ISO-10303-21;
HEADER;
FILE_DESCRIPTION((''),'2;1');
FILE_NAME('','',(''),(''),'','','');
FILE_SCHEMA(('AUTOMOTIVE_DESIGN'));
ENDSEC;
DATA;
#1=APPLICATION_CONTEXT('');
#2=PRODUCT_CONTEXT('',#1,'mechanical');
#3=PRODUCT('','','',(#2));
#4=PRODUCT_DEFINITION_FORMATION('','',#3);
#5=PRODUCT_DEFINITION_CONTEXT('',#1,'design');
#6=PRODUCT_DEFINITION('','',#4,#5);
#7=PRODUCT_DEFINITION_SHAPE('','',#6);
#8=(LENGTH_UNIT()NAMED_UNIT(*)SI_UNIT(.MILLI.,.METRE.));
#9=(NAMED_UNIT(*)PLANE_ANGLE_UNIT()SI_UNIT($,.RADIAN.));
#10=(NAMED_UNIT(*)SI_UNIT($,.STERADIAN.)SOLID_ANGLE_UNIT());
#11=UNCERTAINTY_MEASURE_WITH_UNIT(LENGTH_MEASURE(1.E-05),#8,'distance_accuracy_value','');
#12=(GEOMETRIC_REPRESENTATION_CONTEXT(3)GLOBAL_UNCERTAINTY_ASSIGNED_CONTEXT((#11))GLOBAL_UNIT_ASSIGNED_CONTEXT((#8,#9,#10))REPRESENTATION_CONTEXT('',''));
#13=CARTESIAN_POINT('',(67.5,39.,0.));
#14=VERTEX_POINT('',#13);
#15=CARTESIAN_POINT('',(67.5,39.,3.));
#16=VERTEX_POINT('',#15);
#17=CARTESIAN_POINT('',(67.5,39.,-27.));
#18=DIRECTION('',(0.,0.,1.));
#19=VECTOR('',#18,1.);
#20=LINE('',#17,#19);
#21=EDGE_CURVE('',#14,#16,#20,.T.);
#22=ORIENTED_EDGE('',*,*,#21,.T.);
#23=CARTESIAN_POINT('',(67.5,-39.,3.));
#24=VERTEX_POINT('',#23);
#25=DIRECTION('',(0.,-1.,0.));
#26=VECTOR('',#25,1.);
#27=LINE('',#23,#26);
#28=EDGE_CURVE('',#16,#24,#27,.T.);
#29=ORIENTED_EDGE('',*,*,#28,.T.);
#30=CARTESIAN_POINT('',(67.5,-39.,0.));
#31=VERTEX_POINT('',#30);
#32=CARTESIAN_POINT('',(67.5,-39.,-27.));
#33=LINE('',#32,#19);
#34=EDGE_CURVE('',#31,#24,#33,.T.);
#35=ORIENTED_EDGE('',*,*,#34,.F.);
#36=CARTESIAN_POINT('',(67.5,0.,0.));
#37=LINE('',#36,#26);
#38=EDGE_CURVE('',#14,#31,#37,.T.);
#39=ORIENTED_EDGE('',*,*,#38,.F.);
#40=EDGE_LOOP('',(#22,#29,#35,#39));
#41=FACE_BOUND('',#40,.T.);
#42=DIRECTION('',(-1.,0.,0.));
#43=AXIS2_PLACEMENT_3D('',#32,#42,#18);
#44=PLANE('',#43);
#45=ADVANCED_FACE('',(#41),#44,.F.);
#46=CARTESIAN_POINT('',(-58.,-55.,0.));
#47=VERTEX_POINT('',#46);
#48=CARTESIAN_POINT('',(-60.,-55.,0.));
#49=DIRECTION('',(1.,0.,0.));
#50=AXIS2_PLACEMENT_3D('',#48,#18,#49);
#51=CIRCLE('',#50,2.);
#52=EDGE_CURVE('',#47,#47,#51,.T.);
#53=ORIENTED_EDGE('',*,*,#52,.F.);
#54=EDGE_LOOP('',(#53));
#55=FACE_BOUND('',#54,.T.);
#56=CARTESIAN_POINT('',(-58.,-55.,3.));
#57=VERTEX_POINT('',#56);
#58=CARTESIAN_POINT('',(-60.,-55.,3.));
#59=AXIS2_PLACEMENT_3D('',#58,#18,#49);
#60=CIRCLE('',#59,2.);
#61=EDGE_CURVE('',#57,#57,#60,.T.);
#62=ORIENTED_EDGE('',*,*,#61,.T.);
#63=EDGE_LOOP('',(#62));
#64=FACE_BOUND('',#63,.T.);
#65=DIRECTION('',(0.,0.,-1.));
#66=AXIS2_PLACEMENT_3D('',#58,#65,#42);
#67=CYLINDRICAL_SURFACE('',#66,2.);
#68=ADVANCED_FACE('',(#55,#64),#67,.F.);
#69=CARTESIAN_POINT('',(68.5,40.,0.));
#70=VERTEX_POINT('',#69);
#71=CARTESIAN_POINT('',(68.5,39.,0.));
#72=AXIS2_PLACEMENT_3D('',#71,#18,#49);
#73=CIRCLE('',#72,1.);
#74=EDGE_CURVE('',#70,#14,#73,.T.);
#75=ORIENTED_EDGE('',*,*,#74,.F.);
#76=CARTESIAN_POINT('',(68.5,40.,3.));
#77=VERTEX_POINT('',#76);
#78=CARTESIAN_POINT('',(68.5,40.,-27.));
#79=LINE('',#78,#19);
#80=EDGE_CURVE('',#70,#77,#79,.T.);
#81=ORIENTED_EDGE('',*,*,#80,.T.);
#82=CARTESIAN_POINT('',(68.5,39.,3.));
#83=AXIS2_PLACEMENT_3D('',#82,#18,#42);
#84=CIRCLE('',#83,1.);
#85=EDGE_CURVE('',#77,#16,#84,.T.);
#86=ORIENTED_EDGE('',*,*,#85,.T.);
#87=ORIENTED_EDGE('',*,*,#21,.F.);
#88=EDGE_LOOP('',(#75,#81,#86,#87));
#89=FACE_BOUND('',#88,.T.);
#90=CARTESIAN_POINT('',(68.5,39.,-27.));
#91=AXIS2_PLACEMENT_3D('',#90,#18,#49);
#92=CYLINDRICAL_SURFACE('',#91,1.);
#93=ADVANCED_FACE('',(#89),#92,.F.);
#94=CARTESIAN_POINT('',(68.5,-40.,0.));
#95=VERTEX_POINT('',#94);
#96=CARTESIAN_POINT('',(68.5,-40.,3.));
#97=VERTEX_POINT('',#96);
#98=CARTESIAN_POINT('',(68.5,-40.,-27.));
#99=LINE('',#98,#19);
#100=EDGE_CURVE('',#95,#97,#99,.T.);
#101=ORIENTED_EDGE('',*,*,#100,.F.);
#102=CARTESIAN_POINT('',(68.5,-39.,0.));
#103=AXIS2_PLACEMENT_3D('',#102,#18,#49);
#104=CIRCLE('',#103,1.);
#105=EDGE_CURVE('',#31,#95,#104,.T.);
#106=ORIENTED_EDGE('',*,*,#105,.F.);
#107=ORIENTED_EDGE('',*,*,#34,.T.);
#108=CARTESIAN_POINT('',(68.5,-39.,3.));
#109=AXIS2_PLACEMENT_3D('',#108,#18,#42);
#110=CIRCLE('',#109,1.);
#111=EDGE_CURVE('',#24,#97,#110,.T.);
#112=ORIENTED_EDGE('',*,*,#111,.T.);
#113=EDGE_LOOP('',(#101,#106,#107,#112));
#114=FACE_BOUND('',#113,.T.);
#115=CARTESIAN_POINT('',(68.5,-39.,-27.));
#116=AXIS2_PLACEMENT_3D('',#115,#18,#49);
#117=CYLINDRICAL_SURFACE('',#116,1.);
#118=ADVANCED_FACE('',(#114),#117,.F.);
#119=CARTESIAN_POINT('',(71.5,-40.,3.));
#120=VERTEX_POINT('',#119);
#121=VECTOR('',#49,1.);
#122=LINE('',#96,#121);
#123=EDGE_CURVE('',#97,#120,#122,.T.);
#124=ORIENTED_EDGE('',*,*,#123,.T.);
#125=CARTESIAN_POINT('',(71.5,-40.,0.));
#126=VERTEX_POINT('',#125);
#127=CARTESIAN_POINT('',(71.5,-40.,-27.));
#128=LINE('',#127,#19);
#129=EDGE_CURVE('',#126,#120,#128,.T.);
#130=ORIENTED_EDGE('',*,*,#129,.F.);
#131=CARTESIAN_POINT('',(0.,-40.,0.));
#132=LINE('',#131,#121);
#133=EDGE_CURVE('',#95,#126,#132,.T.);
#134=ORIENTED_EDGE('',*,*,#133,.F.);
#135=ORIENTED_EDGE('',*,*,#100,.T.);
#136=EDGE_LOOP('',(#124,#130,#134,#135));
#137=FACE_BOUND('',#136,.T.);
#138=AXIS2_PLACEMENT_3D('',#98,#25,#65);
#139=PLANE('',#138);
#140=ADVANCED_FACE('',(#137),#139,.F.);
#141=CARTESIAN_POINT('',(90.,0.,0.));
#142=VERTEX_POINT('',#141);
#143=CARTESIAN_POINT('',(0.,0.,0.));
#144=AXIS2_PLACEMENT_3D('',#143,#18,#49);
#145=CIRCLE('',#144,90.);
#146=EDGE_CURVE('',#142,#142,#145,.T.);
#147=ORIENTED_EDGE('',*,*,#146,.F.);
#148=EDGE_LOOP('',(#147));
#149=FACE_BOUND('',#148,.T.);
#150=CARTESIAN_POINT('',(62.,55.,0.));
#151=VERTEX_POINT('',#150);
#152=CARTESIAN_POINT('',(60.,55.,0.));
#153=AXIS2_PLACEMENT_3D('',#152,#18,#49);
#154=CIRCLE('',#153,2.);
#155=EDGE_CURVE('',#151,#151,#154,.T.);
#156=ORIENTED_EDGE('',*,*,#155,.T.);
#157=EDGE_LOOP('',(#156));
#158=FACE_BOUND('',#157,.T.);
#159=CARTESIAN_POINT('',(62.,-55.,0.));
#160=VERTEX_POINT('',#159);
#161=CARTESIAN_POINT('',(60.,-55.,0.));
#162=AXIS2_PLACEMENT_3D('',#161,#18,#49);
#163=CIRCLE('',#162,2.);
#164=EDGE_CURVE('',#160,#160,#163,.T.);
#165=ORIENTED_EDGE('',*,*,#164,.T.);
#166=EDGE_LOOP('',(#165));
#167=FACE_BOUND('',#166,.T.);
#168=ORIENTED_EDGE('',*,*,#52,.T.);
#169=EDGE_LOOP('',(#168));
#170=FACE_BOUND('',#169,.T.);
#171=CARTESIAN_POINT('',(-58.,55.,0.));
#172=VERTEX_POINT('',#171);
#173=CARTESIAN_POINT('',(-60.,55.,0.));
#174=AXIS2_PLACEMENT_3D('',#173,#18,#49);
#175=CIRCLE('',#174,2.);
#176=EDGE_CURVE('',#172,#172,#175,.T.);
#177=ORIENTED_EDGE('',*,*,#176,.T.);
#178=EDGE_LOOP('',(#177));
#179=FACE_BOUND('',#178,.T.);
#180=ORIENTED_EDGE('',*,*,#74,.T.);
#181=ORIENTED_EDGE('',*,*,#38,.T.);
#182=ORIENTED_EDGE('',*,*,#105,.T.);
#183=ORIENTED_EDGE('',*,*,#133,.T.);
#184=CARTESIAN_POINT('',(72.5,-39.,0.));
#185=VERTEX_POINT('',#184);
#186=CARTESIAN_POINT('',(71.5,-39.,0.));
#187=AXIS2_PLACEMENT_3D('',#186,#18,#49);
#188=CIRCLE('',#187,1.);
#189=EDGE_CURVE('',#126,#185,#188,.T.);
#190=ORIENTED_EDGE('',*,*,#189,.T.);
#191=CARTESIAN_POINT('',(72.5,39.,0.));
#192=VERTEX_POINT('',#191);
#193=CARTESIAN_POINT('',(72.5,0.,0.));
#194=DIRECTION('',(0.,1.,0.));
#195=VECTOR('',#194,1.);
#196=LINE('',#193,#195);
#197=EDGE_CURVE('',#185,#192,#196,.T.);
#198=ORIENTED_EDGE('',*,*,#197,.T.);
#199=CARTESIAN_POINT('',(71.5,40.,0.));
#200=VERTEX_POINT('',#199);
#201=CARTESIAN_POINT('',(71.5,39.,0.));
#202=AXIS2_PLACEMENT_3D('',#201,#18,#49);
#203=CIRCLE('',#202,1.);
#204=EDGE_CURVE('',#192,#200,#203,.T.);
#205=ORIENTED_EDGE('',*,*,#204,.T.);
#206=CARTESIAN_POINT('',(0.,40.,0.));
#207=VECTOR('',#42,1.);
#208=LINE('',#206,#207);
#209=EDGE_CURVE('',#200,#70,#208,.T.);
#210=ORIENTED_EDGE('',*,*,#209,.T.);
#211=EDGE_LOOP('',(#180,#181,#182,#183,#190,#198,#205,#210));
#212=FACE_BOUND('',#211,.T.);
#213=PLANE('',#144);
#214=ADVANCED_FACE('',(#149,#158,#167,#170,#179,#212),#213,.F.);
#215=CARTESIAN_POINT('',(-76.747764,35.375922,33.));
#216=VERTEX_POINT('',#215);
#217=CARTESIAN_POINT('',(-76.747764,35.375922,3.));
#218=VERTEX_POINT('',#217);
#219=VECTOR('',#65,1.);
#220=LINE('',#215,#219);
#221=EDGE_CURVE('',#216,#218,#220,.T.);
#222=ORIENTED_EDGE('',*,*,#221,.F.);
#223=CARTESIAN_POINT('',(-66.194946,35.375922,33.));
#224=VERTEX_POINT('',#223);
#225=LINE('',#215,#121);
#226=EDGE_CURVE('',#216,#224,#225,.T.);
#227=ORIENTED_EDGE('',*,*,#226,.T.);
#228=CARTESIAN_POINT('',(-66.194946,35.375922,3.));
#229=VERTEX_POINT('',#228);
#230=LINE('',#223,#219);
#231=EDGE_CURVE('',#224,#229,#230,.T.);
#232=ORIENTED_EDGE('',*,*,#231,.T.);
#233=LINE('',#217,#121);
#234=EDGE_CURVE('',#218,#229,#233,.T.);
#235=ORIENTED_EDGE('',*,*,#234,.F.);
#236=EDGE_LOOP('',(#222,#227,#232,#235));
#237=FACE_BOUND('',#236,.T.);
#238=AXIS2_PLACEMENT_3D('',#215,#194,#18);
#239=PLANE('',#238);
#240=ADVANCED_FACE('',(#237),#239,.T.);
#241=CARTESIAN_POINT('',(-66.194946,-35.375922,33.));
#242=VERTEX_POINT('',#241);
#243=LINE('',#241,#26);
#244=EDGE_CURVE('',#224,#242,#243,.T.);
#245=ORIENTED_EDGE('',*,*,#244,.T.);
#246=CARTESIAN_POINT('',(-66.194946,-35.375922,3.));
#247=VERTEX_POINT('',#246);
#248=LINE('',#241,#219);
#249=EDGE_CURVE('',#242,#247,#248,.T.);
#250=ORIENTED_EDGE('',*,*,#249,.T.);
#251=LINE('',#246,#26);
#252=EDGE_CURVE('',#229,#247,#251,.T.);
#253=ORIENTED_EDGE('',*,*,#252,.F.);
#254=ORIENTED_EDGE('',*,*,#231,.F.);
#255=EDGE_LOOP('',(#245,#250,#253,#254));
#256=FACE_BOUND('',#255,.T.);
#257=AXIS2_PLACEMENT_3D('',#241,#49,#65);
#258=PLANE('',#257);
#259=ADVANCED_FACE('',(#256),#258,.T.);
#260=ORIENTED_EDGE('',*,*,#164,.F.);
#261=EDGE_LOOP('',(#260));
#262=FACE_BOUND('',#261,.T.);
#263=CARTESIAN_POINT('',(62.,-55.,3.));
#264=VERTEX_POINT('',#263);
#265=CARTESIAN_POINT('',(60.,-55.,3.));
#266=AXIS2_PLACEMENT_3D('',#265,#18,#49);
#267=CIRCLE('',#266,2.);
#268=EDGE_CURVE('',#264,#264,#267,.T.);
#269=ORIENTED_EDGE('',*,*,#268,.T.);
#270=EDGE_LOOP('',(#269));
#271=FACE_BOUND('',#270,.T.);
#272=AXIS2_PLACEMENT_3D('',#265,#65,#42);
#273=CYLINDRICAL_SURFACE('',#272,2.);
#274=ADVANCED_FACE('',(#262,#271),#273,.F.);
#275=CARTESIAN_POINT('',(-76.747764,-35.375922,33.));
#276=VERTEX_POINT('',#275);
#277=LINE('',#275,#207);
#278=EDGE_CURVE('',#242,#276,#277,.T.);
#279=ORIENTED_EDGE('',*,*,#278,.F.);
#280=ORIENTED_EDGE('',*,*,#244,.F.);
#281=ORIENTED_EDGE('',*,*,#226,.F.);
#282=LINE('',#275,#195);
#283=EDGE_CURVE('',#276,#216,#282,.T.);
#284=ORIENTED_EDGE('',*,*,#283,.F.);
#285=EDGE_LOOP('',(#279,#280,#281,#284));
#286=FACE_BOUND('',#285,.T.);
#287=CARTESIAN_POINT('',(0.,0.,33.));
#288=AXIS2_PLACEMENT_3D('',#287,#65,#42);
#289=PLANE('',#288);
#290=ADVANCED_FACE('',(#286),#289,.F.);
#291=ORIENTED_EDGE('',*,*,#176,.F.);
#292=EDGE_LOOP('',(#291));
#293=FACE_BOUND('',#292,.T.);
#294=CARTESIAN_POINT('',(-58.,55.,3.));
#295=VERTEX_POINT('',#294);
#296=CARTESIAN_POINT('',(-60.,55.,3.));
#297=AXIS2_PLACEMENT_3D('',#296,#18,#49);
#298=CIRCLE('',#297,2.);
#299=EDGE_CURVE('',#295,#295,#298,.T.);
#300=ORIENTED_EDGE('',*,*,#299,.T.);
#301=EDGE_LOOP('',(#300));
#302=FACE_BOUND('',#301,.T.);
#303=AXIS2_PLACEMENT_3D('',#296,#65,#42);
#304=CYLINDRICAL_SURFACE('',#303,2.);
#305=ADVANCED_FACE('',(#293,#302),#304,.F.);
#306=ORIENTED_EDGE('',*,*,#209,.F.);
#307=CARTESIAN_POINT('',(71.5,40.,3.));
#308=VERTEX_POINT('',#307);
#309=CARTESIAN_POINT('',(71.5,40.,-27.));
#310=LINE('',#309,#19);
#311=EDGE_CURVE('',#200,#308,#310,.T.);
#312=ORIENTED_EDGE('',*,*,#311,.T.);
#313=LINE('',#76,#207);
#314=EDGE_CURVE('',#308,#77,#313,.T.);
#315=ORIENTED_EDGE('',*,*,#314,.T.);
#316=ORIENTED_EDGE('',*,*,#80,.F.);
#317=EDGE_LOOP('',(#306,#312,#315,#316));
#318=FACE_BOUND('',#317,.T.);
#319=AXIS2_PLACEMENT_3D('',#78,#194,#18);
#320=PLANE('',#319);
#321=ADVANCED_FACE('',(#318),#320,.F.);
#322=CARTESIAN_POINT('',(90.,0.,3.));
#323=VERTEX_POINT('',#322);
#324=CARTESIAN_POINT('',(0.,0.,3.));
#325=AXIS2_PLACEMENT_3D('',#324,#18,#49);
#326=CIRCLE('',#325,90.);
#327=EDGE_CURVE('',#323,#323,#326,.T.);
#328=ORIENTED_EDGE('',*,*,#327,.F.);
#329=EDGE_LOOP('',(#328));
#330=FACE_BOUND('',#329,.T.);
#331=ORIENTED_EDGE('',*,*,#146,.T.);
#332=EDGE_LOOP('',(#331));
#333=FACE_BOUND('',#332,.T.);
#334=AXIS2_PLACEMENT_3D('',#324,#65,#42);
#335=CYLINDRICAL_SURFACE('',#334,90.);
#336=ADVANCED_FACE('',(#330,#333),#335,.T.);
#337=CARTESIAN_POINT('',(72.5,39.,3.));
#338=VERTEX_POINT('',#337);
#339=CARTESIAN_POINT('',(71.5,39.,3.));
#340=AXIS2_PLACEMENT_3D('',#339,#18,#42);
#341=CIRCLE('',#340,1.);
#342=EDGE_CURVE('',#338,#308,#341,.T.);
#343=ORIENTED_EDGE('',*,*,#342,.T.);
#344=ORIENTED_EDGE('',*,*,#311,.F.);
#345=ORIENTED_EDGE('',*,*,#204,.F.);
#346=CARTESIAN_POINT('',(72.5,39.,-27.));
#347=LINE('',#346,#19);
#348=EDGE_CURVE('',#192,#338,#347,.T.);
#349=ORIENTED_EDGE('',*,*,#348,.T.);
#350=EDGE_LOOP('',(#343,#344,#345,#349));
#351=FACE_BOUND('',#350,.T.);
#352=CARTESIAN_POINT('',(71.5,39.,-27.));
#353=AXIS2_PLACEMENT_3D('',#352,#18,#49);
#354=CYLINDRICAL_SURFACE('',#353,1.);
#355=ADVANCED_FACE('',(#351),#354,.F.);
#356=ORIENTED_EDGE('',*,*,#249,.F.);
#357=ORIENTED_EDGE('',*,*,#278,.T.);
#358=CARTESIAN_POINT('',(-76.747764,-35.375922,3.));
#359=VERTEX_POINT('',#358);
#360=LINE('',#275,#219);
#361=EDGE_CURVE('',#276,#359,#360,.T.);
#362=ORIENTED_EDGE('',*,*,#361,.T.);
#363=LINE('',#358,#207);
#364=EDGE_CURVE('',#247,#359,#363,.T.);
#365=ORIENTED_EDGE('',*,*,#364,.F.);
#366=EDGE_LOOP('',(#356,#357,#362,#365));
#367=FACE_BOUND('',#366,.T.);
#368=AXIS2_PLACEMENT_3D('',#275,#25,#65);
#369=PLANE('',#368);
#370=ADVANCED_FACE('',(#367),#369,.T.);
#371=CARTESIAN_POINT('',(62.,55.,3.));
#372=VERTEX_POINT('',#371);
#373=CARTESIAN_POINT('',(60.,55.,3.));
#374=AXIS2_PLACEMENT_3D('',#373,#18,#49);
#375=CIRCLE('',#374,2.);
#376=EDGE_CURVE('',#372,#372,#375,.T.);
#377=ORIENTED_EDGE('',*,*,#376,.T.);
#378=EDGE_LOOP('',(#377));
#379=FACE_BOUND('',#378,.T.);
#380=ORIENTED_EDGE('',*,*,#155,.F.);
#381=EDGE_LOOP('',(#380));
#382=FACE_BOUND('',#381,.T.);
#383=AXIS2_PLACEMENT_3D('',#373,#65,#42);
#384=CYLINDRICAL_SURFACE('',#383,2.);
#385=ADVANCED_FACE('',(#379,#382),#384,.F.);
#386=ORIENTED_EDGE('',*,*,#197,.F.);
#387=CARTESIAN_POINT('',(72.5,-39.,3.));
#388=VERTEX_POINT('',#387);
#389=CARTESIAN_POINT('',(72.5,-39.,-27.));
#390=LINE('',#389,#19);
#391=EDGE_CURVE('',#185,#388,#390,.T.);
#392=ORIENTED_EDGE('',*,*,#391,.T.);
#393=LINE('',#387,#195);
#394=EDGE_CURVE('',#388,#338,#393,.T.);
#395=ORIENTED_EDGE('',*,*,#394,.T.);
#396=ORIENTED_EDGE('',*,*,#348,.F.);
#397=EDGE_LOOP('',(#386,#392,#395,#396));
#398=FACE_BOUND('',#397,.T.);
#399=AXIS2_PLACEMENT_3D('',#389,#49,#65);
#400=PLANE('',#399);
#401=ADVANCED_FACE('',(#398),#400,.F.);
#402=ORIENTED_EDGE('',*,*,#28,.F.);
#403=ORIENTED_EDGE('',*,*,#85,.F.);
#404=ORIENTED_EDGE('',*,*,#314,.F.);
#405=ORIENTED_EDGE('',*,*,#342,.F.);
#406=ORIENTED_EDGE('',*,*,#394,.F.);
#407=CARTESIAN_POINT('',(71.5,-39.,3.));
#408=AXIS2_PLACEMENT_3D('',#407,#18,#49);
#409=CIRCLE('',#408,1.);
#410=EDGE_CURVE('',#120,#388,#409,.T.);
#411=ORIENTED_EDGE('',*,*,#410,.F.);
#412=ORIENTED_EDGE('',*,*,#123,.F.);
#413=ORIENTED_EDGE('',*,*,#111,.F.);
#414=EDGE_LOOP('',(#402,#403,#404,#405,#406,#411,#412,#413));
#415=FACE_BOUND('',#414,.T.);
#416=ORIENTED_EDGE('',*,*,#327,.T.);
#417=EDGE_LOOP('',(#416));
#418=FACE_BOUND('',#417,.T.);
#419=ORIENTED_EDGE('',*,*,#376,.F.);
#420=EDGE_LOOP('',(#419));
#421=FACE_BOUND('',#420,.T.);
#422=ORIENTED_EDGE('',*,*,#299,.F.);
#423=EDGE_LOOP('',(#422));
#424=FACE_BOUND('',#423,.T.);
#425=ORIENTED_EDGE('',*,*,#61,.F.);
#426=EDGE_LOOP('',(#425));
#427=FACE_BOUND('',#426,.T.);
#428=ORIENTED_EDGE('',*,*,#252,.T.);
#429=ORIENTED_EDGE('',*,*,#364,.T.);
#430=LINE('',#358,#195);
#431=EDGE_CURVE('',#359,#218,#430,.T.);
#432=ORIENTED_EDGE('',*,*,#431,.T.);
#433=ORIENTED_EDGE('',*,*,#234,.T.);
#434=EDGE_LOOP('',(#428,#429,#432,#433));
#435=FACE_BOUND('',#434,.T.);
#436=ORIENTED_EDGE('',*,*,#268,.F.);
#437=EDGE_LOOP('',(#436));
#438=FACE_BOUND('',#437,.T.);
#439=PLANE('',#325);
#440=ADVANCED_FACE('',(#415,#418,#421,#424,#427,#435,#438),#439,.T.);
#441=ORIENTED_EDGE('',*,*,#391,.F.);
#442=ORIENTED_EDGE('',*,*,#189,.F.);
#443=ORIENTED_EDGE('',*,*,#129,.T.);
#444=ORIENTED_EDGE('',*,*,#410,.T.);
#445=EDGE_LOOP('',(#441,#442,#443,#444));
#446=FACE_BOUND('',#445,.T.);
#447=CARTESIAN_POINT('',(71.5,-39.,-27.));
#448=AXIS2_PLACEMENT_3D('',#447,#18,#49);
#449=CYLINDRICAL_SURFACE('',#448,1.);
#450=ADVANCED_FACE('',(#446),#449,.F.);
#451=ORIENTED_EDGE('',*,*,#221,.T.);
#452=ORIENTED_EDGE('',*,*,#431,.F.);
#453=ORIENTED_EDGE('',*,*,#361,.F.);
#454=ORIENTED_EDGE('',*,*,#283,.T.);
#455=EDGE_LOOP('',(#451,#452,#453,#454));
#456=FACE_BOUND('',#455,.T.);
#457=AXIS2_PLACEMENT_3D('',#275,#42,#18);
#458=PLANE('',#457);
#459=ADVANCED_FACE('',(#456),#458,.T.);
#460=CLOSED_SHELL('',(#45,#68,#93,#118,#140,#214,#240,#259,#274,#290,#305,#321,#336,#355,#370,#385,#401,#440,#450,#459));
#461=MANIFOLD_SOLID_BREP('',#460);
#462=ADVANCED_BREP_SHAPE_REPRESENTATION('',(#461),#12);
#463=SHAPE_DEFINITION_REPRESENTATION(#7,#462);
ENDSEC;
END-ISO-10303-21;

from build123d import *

# Parameters (mm, degrees)
EXTRUDE_1_OUTLINE_R   = 90
EXTRUDE_1_OUTLINE_R_2 = 2
EXTRUDE_1_DEPTH       = 3
SKETCH_4_W            = 10.552817488
SKETCH_4_H            = 70.751844526
EXTRUDE_2_DEPTH       = 30
CUT_EXTRUDE_1_DEPTH   = 30


# Read off the part's stored shape, not the designer's step: 填料-伸長1
with BuildPart() as part:
    # 填料-伸長1 outline → 填料-伸長1 (new body)
    with BuildSketch(Plane.XY):
        Circle(EXTRUDE_1_OUTLINE_R)
        with Locations((-60, -55)):
            Circle(EXTRUDE_1_OUTLINE_R_2, mode=Mode.SUBTRACT)
        with Locations((60, -55)):
            Circle(EXTRUDE_1_OUTLINE_R_2, mode=Mode.SUBTRACT)
        with Locations((-60, 55)):
            Circle(EXTRUDE_1_OUTLINE_R_2, mode=Mode.SUBTRACT)
        with Locations((60, 55)):
            Circle(EXTRUDE_1_OUTLINE_R_2, mode=Mode.SUBTRACT)
    extrude(amount=EXTRUDE_1_DEPTH)

    # 草圖4 → 填料-伸長2 (add)
    with BuildSketch(Plane(origin=(0, 0, 3), x_dir=(-1, 0, 0), z_dir=(0, 0, -1))):
        with Locations((71.471354809, 0)):
            Rectangle(SKETCH_4_W, SKETCH_4_H)
    extrude(amount=-EXTRUDE_2_DEPTH)

    # 草圖5 → 除料-伸長1 (cut)
    with BuildSketch(Plane.XY.offset(3)):
        with BuildLine():
            Line((68.5, -40), (71.5, -40))
            ThreePointArc((71.5, -40), (72.207106781, -39.707106781), (72.5, -39))
            Line((72.5, -39), (72.5, 39))
            ThreePointArc((72.5, 39), (72.207106781, 39.707106781), (71.5, 40))
            Line((71.5, 40), (68.5, 40))
            ThreePointArc((68.5, 40), (67.792893219, 39.707106781), (67.5, 39))
            Line((67.5, 39), (67.5, -39))
            ThreePointArc((67.5, -39), (67.792893219, -39.707106781), (68.5, -40))
        make_face()
    extrude(amount=-CUT_EXTRUDE_1_DEPTH, mode=Mode.SUBTRACT)


solid = part.part
